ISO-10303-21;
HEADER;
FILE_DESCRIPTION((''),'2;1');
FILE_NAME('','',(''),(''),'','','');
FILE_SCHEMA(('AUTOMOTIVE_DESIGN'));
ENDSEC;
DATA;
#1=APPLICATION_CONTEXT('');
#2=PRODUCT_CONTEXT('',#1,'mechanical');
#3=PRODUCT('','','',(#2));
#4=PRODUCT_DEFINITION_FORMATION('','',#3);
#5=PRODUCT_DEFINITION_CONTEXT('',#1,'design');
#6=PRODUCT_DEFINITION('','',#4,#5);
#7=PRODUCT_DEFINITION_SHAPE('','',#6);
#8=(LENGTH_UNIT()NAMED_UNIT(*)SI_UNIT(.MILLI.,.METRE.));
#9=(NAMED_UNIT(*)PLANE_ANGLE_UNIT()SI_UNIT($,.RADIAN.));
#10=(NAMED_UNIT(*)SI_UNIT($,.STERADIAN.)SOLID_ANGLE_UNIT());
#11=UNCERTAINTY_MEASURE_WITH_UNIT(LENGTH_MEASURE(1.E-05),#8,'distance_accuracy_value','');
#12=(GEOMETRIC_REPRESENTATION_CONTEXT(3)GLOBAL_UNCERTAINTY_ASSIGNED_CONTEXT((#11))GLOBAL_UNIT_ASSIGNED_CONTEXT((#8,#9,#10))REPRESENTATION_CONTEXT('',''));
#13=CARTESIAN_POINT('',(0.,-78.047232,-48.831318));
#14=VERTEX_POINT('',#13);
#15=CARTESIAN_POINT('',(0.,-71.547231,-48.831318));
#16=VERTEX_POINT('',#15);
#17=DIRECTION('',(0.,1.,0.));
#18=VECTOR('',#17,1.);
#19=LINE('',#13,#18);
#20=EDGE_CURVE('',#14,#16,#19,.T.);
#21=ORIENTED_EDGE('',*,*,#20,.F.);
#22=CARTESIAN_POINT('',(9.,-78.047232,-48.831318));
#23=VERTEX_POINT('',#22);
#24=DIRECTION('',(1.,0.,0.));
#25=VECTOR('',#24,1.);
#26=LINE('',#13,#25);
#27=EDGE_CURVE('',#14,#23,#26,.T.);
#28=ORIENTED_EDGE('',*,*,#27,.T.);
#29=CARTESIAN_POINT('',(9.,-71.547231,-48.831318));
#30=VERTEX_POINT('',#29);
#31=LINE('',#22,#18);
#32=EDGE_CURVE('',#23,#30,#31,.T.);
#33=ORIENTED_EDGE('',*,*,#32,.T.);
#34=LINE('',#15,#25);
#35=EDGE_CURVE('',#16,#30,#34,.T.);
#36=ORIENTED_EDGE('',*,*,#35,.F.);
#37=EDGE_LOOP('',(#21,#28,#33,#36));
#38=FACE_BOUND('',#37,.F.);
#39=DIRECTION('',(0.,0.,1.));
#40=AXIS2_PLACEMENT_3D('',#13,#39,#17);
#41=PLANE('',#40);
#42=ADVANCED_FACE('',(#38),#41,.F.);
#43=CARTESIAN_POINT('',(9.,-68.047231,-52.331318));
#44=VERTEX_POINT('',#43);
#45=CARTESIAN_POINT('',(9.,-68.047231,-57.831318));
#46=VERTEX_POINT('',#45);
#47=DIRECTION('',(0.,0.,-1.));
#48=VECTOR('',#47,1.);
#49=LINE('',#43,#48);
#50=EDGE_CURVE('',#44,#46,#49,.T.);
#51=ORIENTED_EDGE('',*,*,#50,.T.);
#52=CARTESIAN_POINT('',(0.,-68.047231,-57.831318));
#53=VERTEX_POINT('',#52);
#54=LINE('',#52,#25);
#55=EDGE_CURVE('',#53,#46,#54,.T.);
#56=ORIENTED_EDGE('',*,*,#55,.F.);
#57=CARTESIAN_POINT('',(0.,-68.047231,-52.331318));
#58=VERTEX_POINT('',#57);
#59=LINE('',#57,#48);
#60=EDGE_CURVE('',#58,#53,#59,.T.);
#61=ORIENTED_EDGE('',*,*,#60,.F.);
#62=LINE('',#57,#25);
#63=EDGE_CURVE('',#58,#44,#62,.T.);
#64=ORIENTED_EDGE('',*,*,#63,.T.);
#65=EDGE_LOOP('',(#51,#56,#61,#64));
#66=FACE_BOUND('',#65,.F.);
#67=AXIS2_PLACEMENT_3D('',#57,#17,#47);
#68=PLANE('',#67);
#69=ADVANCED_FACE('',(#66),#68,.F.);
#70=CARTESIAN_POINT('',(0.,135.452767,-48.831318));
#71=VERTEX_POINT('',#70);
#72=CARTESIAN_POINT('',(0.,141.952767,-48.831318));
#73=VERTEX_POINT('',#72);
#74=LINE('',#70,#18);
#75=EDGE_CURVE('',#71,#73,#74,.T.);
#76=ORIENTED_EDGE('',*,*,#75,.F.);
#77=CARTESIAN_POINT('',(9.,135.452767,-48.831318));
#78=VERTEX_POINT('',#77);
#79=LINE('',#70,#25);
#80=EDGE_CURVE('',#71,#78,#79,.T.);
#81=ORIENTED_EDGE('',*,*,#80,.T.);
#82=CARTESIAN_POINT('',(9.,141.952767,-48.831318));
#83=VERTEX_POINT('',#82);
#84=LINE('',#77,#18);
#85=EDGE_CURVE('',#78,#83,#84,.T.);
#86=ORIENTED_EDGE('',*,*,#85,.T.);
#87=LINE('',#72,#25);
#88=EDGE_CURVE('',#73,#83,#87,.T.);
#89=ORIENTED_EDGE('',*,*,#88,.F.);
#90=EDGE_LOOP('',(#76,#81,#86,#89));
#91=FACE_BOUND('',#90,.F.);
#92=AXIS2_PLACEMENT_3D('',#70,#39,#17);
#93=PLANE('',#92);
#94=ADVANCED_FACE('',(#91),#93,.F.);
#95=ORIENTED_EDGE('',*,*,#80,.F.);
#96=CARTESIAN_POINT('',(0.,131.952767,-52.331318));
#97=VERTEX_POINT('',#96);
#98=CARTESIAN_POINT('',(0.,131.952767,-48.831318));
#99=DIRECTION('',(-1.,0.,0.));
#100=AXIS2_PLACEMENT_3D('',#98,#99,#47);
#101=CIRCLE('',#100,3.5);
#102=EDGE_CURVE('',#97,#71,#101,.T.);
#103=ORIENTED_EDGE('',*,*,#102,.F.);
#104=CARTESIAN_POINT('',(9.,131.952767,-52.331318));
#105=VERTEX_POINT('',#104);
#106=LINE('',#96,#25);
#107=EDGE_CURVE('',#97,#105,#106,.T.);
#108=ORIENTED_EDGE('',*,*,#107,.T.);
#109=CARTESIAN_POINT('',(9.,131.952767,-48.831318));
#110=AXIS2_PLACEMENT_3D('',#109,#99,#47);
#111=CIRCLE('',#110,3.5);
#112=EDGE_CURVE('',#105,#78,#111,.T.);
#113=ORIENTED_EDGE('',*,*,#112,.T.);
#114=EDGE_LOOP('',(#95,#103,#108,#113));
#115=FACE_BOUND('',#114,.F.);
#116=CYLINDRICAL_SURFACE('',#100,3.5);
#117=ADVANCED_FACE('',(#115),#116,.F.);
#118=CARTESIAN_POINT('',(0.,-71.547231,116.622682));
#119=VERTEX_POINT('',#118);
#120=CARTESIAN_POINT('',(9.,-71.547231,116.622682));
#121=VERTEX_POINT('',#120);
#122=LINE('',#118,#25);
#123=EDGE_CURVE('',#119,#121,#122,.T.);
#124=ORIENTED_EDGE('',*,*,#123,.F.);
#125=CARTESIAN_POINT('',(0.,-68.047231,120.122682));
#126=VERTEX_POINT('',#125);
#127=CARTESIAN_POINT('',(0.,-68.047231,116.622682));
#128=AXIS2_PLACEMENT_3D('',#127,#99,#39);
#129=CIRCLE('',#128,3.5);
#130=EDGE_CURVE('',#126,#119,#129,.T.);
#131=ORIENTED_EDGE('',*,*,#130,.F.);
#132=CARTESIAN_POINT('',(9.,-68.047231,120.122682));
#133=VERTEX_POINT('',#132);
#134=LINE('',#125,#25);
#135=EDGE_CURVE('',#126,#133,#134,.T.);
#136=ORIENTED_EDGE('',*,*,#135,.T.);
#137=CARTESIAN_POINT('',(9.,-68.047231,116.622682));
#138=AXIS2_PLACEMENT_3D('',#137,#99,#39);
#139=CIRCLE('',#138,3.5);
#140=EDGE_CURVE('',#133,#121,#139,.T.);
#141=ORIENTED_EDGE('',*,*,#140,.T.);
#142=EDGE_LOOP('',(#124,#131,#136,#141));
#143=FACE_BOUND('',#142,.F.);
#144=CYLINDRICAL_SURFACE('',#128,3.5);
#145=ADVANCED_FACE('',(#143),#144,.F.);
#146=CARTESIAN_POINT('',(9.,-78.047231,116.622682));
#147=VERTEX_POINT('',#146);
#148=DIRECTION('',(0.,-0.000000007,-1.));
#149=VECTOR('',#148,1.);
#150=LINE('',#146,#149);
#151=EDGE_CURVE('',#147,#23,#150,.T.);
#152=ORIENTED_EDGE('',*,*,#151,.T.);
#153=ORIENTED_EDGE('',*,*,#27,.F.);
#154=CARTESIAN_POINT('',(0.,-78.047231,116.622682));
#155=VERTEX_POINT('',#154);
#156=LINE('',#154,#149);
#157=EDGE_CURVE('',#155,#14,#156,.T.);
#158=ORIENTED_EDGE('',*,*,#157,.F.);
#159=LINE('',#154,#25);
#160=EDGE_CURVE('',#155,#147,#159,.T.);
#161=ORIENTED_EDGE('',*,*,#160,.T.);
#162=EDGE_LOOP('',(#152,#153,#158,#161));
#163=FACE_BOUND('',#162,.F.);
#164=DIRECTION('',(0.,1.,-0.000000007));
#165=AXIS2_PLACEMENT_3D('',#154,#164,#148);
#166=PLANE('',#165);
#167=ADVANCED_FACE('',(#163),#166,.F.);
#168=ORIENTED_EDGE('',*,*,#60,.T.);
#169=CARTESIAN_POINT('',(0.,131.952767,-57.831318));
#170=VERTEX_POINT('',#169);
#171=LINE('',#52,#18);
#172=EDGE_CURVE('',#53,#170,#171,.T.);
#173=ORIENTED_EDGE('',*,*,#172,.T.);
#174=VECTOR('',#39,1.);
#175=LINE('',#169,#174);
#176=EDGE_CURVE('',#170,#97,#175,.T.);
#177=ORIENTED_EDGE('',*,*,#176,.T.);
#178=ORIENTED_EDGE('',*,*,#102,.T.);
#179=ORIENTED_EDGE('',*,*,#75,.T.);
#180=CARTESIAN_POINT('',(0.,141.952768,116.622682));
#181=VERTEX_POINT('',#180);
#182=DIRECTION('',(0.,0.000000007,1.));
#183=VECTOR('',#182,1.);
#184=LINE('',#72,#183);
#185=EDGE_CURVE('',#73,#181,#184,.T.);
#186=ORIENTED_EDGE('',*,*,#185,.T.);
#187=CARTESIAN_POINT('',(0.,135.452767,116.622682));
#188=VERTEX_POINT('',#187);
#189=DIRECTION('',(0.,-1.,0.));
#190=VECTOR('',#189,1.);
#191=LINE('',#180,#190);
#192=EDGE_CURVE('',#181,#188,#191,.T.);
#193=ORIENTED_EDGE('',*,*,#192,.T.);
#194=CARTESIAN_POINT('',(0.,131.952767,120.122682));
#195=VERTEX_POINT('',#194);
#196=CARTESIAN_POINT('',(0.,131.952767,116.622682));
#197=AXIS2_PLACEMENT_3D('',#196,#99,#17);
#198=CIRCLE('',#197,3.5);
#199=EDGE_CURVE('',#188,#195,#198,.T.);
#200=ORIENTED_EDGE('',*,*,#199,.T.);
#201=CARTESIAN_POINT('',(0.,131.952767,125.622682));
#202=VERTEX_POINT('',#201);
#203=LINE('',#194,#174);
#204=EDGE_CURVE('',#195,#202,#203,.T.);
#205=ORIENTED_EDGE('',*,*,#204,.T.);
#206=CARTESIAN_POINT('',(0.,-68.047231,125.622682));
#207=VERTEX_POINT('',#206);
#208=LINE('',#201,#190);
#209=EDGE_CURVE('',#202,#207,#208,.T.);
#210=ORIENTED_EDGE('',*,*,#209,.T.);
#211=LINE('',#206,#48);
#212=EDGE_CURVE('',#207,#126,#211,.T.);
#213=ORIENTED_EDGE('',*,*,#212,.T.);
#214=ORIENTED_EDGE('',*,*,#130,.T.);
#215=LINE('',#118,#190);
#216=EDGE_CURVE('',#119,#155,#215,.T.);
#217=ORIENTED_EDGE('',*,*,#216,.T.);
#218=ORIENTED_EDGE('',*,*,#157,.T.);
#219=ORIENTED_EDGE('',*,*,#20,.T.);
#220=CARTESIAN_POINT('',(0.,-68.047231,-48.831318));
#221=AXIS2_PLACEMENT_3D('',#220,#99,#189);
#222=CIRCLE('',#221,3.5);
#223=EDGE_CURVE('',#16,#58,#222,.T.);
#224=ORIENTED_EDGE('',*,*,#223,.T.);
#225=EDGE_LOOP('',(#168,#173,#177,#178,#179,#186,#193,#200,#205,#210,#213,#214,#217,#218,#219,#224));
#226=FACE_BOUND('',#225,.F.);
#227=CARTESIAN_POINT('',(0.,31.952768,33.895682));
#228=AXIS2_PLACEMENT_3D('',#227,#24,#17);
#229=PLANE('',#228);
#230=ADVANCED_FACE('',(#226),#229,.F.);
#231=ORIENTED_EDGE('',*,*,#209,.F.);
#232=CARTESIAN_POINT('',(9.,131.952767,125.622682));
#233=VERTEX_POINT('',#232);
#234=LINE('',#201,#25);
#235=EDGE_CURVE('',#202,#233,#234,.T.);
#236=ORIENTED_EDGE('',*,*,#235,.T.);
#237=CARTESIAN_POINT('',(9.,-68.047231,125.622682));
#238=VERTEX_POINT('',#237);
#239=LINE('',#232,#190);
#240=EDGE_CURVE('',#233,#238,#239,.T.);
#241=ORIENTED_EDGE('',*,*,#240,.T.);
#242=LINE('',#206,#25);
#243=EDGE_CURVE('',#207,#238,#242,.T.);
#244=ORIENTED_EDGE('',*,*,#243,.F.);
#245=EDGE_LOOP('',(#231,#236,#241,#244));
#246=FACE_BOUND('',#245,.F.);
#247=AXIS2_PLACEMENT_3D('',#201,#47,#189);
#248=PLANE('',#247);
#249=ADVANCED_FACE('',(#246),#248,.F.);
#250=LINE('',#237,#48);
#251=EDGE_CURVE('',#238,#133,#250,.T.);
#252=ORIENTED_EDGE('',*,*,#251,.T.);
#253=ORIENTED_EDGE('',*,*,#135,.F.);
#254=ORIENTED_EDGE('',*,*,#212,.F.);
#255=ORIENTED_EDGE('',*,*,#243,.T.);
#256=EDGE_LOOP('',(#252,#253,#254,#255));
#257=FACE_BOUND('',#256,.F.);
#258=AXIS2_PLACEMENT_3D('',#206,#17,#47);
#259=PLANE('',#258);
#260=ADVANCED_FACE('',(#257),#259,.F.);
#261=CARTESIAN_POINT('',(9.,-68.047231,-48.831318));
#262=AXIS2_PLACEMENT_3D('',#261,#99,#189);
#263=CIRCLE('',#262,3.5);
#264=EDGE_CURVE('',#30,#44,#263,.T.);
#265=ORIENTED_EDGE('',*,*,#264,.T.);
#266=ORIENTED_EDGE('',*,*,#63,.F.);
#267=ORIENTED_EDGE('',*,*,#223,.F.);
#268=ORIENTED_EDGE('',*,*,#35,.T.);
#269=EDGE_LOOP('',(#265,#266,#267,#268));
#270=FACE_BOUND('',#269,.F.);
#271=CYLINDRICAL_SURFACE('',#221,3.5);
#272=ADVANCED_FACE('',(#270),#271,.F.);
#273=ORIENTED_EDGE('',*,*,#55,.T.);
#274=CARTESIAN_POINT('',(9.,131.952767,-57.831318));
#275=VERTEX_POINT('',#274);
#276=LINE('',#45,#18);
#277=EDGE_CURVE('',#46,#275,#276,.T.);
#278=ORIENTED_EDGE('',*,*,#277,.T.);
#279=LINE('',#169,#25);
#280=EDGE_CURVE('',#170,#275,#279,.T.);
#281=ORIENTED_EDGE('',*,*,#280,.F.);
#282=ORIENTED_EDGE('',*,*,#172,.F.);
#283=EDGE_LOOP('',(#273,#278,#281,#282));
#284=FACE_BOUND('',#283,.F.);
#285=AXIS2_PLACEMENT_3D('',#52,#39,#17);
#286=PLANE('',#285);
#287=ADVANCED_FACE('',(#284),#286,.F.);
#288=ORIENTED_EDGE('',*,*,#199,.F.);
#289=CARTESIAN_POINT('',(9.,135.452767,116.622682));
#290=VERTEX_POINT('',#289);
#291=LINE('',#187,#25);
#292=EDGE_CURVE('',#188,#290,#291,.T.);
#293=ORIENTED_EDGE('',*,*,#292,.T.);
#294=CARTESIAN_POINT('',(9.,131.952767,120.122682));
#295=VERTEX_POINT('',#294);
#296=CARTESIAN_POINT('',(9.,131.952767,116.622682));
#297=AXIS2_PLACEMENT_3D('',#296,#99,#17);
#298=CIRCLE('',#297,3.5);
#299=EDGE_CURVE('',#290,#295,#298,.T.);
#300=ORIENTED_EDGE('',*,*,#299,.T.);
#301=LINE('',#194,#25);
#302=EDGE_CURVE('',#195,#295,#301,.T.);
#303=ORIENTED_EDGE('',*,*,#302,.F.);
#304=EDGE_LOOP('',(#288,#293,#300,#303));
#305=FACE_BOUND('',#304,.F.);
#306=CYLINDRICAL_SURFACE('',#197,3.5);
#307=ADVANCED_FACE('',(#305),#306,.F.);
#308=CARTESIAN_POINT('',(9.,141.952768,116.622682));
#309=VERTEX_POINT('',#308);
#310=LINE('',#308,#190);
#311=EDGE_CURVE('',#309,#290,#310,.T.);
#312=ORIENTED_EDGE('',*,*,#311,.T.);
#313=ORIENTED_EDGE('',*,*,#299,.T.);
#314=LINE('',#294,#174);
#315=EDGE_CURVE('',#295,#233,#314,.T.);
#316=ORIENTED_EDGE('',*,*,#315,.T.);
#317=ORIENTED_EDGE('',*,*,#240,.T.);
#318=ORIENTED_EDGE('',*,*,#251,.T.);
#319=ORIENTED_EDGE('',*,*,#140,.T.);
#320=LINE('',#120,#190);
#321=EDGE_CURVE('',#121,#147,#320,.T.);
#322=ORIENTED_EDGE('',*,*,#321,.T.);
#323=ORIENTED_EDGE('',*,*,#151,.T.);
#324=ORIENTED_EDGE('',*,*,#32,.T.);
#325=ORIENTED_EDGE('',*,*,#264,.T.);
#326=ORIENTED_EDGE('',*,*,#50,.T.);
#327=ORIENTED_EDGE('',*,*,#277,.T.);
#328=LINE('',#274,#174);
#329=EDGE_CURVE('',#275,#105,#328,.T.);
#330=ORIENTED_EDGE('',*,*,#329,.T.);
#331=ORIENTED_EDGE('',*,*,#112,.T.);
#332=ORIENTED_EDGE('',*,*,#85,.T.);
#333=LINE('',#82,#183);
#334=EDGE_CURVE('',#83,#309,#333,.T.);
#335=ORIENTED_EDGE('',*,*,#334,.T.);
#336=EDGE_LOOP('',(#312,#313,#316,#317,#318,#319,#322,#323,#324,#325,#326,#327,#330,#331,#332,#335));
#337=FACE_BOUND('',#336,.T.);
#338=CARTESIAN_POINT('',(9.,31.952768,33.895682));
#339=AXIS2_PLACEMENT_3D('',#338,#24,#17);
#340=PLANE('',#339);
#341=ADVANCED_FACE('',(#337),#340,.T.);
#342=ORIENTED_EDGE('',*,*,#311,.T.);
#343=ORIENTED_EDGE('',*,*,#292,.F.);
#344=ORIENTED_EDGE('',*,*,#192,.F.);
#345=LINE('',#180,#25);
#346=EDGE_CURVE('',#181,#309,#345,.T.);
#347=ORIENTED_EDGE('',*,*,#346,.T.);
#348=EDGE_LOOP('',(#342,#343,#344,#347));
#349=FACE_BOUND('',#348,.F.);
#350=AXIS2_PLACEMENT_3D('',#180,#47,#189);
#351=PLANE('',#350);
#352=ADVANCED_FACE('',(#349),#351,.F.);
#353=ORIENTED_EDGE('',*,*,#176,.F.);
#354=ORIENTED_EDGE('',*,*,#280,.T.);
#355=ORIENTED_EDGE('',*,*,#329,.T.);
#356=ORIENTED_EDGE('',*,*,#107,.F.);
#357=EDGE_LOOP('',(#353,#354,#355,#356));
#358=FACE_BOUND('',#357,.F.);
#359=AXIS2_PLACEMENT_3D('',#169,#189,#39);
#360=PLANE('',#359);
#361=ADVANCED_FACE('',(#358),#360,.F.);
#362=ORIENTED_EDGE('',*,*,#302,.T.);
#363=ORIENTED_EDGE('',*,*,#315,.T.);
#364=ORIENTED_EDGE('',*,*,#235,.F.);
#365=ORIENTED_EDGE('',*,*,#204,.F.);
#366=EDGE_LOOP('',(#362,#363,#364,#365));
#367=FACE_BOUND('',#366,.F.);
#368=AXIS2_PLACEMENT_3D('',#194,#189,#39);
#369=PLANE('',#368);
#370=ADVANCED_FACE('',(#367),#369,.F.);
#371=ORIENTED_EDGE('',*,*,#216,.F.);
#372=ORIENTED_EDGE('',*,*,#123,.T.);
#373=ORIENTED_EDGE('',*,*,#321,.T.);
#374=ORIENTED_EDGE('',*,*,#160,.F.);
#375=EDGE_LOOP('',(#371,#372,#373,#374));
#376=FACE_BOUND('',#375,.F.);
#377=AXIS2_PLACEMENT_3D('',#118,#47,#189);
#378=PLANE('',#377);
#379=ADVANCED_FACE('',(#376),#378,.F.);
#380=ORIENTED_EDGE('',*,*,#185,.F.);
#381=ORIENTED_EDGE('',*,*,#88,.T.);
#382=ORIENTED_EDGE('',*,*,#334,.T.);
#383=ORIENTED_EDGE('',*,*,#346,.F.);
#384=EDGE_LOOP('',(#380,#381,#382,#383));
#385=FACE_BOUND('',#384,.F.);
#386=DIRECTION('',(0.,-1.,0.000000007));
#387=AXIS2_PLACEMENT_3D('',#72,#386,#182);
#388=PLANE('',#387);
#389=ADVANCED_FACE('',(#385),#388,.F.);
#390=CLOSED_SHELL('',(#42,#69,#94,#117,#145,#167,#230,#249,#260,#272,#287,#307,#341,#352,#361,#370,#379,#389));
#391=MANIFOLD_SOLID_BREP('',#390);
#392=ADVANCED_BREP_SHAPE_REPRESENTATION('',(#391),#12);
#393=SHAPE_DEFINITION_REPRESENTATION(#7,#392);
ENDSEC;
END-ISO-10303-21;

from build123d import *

# Parameters (mm, degrees)
F1_DEPTH = 9


# Not quite as in the source:
# - ends of sketch curves that miss each other by under 0.0002 mm in the source are joined


with BuildPart() as f1:
    # F0 (on Right) → F1 (new body)
    with BuildSketch(Plane.YZ):
        with BuildLine():
            Line((-71.5472308397, 116.6226820285), (-78.0472308397, 116.6226820285))
            Line((-78.0472308397, 116.6226820285), (-78.0472319707, -48.8313179715))
            Line((-78.0472319707, -48.8313179715), (-71.5472308397, -48.8313179715))
            ThreePointArc((-71.5472308397, -48.8313179715), (-65.5723571056, -46.3564442373), (-68.0472308397, -52.3313179715))
            Line((-68.0472308397, -52.3313179715), (-68.0472308397, -57.8313179715))
            Line((-68.0472308397, -57.8313179715), (31.9527691603, -57.8313179715))
            Line((31.9527691603, -57.8313179715), (131.9527668982, -57.8313179715))
            Line((131.9527668982, -57.8313179715), (131.9527668982, -52.3313179715))
            ThreePointArc((131.9527668982, -52.3313179715), (129.4778931641, -46.3564442373), (135.4527668982, -48.8313179715))
            Line((135.4527668982, -48.8313179715), (141.9527668982, -48.8313179715))
            Line((141.9527668982, -48.8313179715), (141.9527680293, 116.6226820285))
            Line((141.9527680293, 116.6226820285), (135.4527668982, 116.6226820285))
            ThreePointArc((135.4527668982, 116.6226820285), (129.4778931641, 114.1478082944), (131.9527668982, 120.1226820285))
            Line((131.9527668982, 120.1226820285), (131.9527668982, 125.6226820285))
            Line((131.9527668982, 125.6226820285), (31.9527668982, 125.6226820285))
            Line((31.9527668982, 125.6226820285), (-68.0472308397, 125.6226820285))
            Line((-68.0472308397, 125.6226820285), (-68.0472308397, 120.1226820285))
            ThreePointArc((-68.0472308397, 120.1226820285), (-65.5723571056, 114.1478082944), (-71.5472308397, 116.6226820285))
        make_face()
    extrude(amount=F1_DEPTH)


solid = f1.part
